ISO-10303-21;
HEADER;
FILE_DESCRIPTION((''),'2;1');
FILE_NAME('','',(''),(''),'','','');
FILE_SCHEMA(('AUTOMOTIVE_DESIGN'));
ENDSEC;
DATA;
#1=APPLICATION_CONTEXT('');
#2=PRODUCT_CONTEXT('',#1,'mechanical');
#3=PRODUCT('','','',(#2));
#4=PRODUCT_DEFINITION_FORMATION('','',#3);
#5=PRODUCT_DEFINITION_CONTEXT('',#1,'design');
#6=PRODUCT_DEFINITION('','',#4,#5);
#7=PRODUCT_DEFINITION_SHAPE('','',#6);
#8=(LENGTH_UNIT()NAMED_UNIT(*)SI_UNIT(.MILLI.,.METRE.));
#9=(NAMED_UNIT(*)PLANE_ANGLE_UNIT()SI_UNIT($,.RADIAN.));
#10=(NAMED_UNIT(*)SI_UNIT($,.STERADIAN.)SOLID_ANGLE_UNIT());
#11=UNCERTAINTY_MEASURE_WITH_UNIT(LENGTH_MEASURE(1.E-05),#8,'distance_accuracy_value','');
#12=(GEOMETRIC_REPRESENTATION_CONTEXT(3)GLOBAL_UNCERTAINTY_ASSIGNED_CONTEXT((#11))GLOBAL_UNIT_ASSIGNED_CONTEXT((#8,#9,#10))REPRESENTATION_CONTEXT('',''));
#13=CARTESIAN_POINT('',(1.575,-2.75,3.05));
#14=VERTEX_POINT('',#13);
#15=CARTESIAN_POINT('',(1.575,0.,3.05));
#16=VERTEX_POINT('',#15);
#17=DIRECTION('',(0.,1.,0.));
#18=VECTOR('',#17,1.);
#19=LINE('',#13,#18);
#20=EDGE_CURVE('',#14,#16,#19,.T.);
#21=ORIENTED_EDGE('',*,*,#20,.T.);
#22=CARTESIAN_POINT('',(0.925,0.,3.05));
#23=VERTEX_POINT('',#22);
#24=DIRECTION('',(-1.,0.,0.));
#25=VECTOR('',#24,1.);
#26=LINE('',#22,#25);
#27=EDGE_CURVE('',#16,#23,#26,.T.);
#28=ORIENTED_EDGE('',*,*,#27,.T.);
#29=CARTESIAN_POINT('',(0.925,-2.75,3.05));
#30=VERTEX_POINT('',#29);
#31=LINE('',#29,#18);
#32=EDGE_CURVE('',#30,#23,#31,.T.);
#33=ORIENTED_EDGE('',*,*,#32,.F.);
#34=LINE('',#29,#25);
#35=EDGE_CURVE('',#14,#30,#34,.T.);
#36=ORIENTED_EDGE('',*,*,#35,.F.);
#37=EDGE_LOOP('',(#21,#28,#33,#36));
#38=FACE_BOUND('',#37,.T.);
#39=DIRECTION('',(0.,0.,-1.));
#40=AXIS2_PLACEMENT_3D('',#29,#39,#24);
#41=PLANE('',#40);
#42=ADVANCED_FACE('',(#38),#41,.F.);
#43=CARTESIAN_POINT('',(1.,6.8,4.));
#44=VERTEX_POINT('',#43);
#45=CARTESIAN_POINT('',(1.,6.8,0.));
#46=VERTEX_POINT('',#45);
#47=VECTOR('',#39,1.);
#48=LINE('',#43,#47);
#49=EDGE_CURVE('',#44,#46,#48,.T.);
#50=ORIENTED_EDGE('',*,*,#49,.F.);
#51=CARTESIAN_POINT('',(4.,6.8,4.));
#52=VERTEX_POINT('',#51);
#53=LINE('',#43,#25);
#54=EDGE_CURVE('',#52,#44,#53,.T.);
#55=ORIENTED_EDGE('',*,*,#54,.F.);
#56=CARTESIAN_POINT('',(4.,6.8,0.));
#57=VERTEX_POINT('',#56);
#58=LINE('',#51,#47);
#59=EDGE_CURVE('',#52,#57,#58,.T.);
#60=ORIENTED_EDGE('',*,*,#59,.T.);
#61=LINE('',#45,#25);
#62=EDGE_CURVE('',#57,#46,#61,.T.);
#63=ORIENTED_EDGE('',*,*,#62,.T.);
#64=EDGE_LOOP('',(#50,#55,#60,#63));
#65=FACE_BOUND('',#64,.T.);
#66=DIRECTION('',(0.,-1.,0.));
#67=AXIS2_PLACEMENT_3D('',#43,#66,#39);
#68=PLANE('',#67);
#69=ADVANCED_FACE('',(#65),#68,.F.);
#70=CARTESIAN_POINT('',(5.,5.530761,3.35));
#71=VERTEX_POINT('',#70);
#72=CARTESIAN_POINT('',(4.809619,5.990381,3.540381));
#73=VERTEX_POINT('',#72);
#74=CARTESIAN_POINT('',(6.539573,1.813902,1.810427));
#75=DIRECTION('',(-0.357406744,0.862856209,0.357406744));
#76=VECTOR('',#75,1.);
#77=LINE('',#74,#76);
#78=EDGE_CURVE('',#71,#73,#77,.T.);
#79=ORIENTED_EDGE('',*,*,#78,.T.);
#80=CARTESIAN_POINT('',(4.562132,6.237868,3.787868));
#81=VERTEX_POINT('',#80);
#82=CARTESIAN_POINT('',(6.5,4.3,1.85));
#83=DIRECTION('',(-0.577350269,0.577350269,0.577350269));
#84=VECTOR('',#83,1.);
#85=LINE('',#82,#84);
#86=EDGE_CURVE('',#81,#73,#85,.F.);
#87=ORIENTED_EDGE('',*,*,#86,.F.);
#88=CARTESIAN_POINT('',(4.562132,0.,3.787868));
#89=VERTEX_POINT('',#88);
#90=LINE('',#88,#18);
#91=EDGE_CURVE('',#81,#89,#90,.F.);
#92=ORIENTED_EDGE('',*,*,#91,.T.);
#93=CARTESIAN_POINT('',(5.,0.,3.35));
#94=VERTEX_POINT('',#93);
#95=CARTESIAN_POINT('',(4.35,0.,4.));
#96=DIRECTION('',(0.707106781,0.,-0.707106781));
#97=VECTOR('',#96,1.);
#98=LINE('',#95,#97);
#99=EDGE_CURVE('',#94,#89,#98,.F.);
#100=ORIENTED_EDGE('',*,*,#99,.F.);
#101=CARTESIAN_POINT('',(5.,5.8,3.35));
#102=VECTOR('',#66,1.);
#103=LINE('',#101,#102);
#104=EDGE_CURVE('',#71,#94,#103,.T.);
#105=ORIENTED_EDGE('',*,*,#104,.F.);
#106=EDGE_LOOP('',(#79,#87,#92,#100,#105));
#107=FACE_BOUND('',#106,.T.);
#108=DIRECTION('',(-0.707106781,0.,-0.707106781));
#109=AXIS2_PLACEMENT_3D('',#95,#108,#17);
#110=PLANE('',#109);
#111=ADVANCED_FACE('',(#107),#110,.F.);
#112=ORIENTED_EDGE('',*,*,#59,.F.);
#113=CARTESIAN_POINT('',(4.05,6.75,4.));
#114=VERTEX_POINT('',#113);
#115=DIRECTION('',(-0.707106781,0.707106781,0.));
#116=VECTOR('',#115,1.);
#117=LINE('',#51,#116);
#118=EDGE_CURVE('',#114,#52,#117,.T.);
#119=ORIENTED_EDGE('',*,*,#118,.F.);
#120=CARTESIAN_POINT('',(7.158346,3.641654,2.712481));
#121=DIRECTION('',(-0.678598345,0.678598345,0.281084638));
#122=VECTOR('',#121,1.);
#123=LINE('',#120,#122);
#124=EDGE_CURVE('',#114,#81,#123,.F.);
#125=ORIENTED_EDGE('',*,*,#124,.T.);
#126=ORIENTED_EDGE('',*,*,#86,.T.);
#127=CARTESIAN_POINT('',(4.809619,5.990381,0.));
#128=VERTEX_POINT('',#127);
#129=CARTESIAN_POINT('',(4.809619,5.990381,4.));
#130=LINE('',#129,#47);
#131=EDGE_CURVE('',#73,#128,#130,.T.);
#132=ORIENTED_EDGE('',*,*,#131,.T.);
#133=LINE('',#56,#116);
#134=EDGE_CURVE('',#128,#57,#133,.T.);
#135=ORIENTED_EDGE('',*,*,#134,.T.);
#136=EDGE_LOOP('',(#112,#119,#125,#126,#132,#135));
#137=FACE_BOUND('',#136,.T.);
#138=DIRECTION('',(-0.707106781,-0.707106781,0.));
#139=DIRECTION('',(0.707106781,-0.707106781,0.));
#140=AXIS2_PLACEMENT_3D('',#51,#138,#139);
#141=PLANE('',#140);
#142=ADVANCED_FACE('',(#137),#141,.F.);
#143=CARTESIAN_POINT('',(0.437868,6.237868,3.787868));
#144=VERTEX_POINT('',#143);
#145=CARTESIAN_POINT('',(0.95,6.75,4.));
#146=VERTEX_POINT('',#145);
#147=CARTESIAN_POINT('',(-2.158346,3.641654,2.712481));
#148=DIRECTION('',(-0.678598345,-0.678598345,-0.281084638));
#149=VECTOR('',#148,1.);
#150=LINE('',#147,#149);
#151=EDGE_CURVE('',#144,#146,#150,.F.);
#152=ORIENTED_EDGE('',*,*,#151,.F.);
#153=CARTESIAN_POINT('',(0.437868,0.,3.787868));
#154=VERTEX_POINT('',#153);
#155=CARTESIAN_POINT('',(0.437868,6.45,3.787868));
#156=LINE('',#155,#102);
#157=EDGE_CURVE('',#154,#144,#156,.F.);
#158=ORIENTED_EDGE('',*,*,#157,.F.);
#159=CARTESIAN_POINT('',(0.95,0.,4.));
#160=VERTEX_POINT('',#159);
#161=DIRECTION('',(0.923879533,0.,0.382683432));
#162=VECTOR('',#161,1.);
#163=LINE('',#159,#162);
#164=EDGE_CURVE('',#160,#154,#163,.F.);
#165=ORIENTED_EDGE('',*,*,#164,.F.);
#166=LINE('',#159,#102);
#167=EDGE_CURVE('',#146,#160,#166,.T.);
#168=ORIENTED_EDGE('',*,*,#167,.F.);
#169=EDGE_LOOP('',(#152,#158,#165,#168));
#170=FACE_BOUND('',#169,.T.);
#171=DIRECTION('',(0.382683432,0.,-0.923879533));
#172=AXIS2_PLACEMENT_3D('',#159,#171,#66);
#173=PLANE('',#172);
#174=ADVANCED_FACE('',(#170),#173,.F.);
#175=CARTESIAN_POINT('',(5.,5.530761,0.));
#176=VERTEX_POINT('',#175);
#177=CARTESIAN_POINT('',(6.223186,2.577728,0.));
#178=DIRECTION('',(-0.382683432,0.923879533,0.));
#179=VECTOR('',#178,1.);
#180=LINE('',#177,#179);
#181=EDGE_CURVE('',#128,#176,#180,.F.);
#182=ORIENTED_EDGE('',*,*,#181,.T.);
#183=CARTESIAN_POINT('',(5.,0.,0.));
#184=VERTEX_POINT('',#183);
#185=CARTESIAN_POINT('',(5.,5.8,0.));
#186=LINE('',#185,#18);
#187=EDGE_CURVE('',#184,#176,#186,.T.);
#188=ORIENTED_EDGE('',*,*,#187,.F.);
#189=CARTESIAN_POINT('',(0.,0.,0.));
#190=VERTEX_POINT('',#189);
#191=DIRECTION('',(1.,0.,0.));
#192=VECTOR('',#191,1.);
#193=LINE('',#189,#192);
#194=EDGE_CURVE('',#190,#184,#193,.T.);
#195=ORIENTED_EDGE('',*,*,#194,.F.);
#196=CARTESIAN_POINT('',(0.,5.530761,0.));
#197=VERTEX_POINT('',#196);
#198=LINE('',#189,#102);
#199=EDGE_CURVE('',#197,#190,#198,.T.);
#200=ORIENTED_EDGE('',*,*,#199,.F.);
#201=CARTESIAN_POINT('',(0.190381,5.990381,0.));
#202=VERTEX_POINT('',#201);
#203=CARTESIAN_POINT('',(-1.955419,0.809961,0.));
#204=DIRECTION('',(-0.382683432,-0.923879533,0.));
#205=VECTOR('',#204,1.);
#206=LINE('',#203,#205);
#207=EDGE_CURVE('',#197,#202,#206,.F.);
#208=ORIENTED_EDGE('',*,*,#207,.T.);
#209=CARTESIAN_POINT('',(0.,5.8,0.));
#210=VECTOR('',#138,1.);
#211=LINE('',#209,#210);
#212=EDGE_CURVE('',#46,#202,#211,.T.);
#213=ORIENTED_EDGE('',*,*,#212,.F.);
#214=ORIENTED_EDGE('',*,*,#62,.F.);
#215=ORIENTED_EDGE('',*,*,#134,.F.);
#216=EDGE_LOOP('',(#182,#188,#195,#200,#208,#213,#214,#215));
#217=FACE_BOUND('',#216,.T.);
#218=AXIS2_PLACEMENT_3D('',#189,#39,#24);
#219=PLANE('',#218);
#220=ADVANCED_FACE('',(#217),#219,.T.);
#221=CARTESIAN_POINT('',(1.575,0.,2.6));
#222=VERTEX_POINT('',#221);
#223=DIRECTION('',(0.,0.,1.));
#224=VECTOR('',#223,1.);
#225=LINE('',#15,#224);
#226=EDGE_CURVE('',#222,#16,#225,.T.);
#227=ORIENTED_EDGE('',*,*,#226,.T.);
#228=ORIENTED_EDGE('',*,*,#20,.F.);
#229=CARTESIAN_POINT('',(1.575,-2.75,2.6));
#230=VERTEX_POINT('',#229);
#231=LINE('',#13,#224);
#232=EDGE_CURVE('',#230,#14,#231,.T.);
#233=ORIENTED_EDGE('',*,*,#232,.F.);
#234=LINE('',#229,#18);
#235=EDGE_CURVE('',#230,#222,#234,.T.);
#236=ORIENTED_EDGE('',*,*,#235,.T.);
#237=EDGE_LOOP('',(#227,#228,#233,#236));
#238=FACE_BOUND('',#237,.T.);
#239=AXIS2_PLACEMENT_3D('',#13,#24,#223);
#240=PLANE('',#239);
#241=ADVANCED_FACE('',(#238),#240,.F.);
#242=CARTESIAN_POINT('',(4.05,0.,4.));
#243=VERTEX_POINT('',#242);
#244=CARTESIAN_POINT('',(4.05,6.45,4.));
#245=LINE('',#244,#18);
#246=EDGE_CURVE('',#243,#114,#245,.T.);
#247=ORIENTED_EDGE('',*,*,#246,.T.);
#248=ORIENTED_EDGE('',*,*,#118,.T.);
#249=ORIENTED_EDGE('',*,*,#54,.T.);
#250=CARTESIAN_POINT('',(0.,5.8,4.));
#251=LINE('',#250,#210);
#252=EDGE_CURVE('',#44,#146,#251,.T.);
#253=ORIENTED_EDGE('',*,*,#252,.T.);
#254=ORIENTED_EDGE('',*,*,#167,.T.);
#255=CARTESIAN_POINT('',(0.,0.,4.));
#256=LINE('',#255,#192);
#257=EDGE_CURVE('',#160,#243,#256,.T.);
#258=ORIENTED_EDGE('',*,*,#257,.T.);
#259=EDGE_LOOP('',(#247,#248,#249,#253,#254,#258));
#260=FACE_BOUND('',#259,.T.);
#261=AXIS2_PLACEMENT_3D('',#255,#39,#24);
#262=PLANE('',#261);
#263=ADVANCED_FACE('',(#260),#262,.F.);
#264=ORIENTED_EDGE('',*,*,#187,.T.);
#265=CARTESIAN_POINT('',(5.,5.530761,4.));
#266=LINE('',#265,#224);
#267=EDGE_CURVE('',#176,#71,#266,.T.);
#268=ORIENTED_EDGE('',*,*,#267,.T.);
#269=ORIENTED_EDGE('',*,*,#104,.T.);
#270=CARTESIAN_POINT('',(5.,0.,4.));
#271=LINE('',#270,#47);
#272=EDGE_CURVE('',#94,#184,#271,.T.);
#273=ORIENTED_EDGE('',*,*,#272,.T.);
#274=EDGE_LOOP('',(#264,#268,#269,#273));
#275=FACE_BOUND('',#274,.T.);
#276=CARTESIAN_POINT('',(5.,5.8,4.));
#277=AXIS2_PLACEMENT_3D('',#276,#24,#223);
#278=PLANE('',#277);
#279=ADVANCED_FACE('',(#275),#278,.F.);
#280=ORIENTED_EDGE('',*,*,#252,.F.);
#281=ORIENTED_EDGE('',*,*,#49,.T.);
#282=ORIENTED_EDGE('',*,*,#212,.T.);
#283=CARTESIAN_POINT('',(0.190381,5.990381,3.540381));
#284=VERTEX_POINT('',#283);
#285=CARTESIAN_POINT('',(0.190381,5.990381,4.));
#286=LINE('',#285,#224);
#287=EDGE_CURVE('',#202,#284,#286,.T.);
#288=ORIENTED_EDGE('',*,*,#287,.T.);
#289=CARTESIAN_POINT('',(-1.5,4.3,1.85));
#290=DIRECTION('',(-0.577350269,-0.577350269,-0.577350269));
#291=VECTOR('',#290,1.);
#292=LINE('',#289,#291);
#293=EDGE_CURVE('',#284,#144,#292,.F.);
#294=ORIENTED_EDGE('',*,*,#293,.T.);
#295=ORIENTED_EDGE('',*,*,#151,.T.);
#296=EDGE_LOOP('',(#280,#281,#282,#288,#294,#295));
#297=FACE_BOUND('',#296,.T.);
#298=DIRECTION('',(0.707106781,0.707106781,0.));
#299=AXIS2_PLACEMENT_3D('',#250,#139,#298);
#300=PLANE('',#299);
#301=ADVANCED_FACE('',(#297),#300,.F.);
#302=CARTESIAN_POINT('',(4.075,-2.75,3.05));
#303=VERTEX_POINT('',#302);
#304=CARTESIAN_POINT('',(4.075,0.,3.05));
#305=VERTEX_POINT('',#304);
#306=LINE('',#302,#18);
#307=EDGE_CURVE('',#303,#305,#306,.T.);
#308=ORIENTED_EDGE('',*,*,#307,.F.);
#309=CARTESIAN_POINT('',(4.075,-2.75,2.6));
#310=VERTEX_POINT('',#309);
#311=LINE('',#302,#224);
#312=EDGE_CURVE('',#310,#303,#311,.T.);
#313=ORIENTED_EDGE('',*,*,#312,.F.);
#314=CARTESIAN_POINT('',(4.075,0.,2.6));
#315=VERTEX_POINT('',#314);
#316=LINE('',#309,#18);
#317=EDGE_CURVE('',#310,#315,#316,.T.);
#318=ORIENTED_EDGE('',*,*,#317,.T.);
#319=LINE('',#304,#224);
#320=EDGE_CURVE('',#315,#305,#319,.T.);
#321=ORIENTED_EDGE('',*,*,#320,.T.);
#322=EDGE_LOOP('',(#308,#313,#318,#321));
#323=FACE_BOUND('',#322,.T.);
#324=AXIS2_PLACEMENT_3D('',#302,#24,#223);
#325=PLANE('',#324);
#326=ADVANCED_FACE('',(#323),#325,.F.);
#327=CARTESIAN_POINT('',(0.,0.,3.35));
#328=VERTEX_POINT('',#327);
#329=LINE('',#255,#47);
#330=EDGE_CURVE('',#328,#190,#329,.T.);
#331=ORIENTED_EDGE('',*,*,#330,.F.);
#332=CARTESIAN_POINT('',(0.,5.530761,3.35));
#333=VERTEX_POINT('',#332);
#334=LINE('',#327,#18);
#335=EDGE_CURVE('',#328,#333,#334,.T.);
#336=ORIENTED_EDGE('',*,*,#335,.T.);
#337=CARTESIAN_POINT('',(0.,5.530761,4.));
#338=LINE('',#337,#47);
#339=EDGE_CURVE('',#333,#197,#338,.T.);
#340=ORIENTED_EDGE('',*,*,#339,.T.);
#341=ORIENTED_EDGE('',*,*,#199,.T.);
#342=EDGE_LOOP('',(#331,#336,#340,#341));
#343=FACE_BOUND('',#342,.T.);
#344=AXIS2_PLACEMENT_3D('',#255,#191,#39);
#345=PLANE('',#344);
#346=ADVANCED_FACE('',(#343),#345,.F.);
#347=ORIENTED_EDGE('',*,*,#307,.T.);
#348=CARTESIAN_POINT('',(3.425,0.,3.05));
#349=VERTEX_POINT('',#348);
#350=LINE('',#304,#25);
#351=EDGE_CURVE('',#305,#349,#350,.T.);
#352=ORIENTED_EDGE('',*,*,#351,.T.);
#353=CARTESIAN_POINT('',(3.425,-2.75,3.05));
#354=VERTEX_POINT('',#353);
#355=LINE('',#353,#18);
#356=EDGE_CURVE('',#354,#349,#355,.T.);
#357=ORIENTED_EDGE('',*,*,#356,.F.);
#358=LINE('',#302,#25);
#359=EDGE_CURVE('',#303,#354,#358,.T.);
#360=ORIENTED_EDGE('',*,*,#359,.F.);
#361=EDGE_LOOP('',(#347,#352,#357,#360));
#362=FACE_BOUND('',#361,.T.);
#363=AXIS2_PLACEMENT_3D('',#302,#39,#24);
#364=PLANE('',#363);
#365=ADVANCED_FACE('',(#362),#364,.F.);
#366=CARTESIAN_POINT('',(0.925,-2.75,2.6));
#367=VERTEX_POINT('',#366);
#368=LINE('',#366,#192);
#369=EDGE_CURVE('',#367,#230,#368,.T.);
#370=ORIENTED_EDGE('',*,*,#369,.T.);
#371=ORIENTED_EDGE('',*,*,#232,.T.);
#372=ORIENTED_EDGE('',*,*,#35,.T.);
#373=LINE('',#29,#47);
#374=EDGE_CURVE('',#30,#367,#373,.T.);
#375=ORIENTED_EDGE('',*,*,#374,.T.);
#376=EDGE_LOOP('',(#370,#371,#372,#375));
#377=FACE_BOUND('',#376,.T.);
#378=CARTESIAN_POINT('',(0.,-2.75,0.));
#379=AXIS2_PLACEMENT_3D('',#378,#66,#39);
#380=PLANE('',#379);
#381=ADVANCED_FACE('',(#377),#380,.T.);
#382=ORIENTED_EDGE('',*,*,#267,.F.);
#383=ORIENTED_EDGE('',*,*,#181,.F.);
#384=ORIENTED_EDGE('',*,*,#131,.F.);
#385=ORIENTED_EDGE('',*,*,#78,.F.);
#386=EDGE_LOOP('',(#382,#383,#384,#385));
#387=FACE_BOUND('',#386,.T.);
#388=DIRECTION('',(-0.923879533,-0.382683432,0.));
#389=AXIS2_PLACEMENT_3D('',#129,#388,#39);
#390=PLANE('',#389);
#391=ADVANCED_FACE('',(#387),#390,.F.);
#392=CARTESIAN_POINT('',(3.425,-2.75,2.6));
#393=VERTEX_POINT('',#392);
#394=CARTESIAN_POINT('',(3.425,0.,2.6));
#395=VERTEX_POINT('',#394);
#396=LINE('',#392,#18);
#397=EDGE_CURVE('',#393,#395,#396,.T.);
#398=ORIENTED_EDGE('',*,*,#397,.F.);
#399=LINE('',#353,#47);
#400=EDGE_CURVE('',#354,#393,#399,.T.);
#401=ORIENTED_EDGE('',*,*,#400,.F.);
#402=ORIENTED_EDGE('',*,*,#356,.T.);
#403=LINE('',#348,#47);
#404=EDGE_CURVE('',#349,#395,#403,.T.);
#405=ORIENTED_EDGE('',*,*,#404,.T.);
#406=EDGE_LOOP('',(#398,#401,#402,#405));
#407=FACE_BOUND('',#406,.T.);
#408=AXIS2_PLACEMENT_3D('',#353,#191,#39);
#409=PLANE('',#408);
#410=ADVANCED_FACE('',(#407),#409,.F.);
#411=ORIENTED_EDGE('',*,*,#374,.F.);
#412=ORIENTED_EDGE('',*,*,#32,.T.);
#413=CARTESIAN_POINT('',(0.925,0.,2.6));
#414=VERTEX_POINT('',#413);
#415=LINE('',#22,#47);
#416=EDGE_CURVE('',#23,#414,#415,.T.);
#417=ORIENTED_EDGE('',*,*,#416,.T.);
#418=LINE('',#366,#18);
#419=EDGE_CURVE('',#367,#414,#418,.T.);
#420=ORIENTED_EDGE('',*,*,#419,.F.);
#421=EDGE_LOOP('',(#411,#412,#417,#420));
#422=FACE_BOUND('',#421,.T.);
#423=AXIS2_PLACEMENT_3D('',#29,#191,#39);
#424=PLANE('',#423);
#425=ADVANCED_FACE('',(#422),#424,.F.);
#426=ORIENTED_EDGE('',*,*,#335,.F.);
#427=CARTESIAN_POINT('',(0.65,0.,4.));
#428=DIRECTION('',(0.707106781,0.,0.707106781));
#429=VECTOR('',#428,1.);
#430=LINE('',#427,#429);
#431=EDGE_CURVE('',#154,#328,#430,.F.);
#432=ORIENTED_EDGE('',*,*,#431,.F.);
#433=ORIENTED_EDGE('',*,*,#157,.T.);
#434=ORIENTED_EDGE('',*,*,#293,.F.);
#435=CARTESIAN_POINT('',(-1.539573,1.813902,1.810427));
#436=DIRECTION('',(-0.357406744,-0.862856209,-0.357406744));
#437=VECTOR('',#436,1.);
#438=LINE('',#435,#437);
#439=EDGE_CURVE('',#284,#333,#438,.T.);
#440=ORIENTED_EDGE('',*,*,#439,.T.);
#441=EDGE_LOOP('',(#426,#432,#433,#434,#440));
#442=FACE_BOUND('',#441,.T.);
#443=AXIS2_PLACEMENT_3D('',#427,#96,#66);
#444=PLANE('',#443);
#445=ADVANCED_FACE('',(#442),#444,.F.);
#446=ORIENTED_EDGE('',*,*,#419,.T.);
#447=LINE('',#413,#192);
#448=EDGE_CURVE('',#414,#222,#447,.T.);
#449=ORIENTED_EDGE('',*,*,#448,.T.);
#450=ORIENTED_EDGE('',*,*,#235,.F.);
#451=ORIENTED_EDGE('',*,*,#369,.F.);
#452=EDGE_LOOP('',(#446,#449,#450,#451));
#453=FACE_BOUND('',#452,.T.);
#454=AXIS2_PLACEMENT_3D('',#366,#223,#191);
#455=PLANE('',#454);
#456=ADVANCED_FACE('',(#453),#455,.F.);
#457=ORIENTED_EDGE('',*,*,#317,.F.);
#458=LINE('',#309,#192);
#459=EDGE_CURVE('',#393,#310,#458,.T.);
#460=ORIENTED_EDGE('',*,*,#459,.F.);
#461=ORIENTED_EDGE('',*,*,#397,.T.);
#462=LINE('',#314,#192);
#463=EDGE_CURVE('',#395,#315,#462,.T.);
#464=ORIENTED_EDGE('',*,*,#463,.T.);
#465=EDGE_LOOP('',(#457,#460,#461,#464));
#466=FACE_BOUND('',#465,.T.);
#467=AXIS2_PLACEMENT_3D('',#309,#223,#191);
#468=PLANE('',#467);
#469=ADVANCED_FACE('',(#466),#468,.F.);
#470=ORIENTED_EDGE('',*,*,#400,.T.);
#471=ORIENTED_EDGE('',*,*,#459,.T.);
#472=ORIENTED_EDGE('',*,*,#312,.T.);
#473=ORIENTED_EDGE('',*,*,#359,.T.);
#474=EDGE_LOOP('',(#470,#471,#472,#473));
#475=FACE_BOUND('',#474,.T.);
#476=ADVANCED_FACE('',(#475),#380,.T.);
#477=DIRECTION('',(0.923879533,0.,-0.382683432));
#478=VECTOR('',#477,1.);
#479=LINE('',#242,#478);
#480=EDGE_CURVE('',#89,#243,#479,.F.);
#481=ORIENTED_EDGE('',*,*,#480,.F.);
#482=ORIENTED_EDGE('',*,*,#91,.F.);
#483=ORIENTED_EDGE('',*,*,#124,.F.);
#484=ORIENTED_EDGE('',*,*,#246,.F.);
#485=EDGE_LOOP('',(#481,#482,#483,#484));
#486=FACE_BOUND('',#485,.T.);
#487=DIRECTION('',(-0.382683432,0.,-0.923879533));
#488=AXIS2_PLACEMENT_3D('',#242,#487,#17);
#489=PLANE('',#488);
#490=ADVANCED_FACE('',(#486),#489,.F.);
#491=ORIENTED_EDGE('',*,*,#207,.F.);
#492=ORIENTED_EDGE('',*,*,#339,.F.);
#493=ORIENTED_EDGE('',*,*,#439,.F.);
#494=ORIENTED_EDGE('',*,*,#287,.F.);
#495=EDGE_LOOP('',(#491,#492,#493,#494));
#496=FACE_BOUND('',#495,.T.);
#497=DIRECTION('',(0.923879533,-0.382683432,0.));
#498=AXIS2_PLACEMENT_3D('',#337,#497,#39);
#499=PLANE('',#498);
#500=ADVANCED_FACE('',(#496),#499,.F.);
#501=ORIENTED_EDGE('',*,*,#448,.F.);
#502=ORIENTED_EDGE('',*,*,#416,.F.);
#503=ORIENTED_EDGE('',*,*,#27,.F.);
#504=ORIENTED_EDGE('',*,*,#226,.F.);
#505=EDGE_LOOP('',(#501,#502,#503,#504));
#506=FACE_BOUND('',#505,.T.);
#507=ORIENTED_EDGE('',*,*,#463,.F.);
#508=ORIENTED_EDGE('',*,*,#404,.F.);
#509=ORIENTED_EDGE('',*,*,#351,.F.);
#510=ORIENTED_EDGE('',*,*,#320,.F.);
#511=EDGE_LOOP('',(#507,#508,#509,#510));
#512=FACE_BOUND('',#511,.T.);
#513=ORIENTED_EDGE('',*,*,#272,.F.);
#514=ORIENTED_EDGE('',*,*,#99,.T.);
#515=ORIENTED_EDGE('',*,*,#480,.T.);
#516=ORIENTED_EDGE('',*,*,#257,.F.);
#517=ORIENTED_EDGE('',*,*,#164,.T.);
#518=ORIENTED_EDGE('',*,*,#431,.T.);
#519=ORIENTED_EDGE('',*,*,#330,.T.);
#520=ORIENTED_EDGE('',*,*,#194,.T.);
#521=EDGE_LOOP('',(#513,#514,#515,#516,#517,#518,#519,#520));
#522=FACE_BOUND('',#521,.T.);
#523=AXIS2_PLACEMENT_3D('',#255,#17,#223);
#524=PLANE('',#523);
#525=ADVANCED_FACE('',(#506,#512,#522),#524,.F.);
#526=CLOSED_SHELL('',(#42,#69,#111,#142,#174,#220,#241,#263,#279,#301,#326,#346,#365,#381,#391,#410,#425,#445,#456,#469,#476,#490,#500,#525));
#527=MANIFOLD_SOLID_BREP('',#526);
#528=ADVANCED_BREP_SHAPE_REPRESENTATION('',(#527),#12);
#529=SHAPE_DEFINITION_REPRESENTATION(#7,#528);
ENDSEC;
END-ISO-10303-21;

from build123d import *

# Parameters (mm, degrees)
Y_KSEKLIK_EKSTR_ZYON1_DEPTH = 4
PAH2_SIZE                   = 0.65
PAH7_SIZE                   = 0.3
PAH8_SIZE                   = 0.3
IZIM2_W                     = 0.65
IZIM2_H                     = 0.45
Y_KSEKLIK_EKSTR_ZYON2_DEPTH = 2.75


with BuildPart() as part:
    # Çizim1 → Yükseklik-Ekstrüzyon1 (new body)
    with BuildSketch(Plane.XY):
        Polygon((0, 0), (5, 0), (5, 5.8), (4, 6.8), (1, 6.8), (0, 5.8), align=None)
    extrude(amount=Y_KSEKLIK_EKSTR_ZYON1_DEPTH)

    # Pah2
    pah2_edges = [part.edges().sort_by_distance(p)[0] for p in [
        (5, 2.9, 4),
        (0, 2.9, 4),
    ]]
    chamfer(pah2_edges, length=PAH2_SIZE)

    # Pah3
    # the kernel refuses this chamfer: 0.65 mm, written as the material it takes off along each edge
    with BuildSketch(Plane(origin=(0, 5.8, -0.733571059), x_dir=(-0.033908675640741216, -0.9994249355085608, 0), z_dir=(0, 0, 1))) as pah3_piece_1:
        with BuildLine():
            Line((0.293428424, 0), (-0.221071103, 0.192945089))
            Line((-0.221071103, 0.192945089), (-0.229946503, 0.183446285))
            ThreePointArc((-0.229946503, 0.183446285), (-0.116014483, 0.090608776), (-0.0088754, -0.009498804))
            Line((-0.0088754, -0.009498804), (0.000440813, -0.012992524))
            ThreePointArc((0.000440813, -0.012992524), (0.146986333, -0.0080205), (0.293869236, -0.012992524))
            Line((0.293869236, -0.012992524), (0.293428424, 0))
        make_face()
    extrude(amount=4.817142118, mode=Mode.SUBTRACT)

    # Pah4
    # the kernel refuses this chamfer: 0.65 mm, written as the material it takes off along each edge
    with BuildSketch(Plane(origin=(5, 5.8, -0.733571059), x_dir=(0.03390867564074173, -0.9994249355085608, 0), z_dir=(0, 0, 1))) as pah4_piece_1:
        with BuildLine():
            Line((0.293428424, 0), (-0.221071103, -0.192945089))
            Line((-0.221071103, -0.192945089), (-0.229946503, -0.183446285))
            ThreePointArc((-0.229946503, -0.183446285), (-0.116014483, -0.090608776), (-0.0088754, 0.009498804))
            Line((-0.0088754, 0.009498804), (0.000440813, 0.012992524))
            ThreePointArc((0.000440813, 0.012992524), (0.146986333, 0.0080205), (0.293869236, 0.012992524))
            Line((0.293869236, 0.012992524), (0.293428424, 0))
        make_face()
    extrude(amount=4.817142118, mode=Mode.SUBTRACT)

    # Pah7
    pah7_edges = [part.edges().sort_by_distance(p)[0] for p in [
        (0.65, 3.225, 4),
    ]]
    chamfer(pah7_edges, length=PAH7_SIZE)

    # Pah8
    pah8_edges = [part.edges().sort_by_distance(p)[0] for p in [
        (4.35, 3.225, 4),
    ]]
    chamfer(pah8_edges, length=PAH8_SIZE)

    # Çizim2 → Yükseklik-Ekstrüzyon2 (add)
    with BuildSketch(Plane.XZ):
        with Locations((1.25, 2.825)):
            Rectangle(IZIM2_W, IZIM2_H)
        with Locations((3.75, 2.825)):
            Rectangle(IZIM2_W, IZIM2_H)
    extrude(amount=Y_KSEKLIK_EKSTR_ZYON2_DEPTH)


solid = part.part
